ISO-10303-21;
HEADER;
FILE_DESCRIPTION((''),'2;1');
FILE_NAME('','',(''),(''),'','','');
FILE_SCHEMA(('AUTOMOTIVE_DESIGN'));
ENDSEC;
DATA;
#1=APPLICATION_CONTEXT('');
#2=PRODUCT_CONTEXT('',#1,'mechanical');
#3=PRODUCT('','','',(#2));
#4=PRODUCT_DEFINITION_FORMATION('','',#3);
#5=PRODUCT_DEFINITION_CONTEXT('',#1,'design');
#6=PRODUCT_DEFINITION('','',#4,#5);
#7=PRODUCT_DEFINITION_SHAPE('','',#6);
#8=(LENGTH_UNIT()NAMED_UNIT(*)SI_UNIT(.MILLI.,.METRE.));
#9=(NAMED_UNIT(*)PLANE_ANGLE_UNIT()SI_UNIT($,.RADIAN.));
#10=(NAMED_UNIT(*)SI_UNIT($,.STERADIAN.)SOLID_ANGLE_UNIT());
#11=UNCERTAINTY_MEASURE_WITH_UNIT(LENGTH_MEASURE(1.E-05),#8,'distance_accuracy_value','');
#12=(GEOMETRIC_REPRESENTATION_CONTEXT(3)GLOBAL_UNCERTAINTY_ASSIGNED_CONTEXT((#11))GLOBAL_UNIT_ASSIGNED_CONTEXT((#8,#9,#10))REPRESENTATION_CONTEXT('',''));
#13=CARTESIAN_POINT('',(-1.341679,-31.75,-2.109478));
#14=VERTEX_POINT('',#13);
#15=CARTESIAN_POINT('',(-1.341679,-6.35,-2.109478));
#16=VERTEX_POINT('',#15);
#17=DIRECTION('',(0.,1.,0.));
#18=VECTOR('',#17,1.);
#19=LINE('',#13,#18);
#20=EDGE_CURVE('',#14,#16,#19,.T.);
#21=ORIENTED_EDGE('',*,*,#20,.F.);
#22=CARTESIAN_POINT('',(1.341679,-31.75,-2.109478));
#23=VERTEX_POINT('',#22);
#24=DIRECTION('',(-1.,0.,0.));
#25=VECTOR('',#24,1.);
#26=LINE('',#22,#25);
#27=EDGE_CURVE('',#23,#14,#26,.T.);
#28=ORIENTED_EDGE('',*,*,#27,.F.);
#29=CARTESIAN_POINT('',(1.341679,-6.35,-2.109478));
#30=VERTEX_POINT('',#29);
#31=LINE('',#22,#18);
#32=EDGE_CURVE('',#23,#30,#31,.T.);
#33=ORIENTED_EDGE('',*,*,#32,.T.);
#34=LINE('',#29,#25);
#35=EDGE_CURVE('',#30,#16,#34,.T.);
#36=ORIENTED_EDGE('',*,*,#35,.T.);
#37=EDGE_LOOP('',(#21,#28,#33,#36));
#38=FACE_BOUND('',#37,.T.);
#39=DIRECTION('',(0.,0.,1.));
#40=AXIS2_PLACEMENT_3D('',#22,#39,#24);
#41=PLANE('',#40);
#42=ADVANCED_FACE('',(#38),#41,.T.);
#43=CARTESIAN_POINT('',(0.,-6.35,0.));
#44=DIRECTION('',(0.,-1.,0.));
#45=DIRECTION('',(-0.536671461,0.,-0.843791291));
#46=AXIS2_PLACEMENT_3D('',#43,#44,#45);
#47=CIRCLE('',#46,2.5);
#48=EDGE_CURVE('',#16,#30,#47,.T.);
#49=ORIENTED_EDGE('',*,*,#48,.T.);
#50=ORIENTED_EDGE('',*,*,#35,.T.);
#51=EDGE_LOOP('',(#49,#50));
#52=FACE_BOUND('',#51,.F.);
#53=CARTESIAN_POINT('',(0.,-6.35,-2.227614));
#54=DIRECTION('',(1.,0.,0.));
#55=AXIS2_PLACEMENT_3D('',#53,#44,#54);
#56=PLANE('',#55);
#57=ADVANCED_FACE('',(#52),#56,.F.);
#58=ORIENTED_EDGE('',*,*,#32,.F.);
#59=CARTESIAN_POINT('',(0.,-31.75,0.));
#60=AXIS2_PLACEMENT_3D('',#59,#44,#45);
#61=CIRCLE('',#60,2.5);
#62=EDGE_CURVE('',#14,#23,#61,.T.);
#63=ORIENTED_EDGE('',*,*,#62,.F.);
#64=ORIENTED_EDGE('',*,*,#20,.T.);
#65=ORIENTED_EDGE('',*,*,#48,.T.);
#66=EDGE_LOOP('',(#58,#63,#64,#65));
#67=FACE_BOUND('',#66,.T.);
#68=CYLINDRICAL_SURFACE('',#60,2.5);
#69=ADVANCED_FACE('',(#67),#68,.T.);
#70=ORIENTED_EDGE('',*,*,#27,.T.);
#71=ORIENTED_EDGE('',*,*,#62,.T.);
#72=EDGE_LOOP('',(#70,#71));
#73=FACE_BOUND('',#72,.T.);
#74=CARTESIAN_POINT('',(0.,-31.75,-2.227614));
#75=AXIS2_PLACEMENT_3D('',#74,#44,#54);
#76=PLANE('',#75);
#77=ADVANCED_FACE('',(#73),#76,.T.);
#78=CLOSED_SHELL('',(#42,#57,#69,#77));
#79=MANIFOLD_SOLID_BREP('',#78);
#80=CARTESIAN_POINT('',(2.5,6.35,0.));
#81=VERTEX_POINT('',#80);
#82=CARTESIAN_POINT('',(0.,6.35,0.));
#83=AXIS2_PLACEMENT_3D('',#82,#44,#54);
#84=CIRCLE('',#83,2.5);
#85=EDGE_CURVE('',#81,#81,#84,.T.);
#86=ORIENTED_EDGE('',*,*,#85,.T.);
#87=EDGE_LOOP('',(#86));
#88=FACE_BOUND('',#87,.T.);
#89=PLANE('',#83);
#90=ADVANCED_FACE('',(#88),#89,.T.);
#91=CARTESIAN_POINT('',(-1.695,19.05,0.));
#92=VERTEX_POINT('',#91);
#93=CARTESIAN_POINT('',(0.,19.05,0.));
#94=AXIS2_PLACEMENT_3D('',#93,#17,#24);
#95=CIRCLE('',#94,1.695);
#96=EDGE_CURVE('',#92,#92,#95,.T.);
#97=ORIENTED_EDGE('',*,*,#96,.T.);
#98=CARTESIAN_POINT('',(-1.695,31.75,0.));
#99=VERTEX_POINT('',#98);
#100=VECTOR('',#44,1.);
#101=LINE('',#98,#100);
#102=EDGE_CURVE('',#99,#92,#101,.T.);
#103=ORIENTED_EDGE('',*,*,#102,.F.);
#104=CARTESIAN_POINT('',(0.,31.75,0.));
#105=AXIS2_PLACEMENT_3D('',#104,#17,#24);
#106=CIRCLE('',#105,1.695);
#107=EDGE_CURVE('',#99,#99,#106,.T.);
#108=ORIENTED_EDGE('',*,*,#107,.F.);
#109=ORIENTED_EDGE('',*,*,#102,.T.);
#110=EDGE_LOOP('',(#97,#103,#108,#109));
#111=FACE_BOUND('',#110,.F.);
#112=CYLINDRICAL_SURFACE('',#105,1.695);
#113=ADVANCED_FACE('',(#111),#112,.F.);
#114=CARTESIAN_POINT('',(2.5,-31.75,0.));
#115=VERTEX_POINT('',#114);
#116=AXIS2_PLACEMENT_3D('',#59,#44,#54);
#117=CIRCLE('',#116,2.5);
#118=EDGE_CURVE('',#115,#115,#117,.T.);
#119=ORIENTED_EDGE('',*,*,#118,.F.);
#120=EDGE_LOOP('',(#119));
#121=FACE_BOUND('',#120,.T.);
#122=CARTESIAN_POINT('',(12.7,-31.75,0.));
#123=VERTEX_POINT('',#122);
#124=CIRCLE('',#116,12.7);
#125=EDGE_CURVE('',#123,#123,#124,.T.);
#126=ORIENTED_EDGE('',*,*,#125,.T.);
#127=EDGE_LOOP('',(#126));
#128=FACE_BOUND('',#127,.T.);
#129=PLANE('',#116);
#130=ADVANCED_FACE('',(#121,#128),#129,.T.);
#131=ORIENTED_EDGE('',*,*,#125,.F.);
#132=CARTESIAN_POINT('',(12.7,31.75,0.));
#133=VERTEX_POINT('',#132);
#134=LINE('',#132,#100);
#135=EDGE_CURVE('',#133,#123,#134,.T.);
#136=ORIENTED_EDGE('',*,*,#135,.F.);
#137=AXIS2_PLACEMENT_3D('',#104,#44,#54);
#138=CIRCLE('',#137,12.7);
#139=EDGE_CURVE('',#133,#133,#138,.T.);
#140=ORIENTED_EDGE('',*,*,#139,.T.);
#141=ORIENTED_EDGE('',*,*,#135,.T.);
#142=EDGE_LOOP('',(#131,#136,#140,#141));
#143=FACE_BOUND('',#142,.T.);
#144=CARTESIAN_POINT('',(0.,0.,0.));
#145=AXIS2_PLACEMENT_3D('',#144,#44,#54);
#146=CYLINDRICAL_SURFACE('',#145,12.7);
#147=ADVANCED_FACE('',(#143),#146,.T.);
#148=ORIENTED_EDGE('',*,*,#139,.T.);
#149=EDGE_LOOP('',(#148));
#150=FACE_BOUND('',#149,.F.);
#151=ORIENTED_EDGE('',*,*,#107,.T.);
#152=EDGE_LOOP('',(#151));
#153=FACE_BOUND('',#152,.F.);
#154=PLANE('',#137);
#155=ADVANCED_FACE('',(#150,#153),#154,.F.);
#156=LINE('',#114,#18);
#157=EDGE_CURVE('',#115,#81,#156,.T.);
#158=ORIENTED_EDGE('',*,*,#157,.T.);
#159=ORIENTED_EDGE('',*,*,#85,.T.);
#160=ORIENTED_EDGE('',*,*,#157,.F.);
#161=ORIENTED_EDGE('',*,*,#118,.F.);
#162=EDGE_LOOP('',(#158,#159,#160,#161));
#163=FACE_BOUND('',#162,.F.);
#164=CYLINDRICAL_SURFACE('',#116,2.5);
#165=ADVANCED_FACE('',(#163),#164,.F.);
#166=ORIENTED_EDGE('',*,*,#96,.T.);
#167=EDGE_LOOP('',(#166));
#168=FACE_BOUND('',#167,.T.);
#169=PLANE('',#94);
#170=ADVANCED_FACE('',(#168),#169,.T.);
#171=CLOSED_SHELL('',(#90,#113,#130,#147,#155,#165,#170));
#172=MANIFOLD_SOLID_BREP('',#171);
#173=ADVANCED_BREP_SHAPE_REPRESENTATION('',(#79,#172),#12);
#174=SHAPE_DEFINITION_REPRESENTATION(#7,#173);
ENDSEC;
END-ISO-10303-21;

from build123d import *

# Parameters (mm, degrees)
F0_R      = 10.16
F1_DEPTH  = 50.8
F2_R      = 0.25
F3_DEPTH  = 25.4
F5_R      = 12.7
F6_DEPTH  = 31.75
F7_R      = 2.5
F8_DEPTH  = 38.1
F10_DEPTH = 25.4
F11_R     = 1.695
F12_DEPTH = 12.7


with BuildPart() as f1:
    # F0 (on Front) → F1 (new body)
    with BuildSketch(Plane.XZ):
        Circle(F0_R)
    extrude(amount=F1_DEPTH)

    # F2 (on face) → F3 (cut)
    with BuildSketch(Plane.XZ.offset(50.8)):
        Circle(F2_R)
    extrude(amount=-F3_DEPTH, mode=Mode.SUBTRACT)


with BuildPart() as f6:
    # F5 (on Front) → F6 (new body, symmetric)
    with BuildSketch(Plane.XZ):
        Circle(F5_R)
    extrude(amount=F6_DEPTH, both=True)

    # F7 (on face) → F8 (cut)
    with BuildSketch(Plane.XZ.offset(31.75)):
        Circle(F7_R)
    extrude(amount=-F8_DEPTH, mode=Mode.SUBTRACT)

    # F11 (on face) → F12 (cut)
    with BuildSketch(Plane(origin=(0, 31.75, 0), x_dir=(-1, 0, 0), z_dir=(0, 1, 0))):
        Circle(F11_R)
    extrude(amount=-F12_DEPTH, mode=Mode.SUBTRACT)


with BuildPart() as f10:
    # F9 (on face) → F10 (new body)
    with BuildSketch(Plane.XZ.offset(31.75)):
        with BuildLine():
            Line((1.3416786525, -2.1094782278), (0, -2.1094782278))
            Line((0, -2.1094782278), (-1.3416786525, -2.1094782278))
            ThreePointArc((-1.3416786525, -2.1094782278), (0, -2.5), (1.3416786525, -2.1094782278))
        make_face()
    extrude(amount=-F10_DEPTH)


solid = Compound([f6.part, f10.part])
